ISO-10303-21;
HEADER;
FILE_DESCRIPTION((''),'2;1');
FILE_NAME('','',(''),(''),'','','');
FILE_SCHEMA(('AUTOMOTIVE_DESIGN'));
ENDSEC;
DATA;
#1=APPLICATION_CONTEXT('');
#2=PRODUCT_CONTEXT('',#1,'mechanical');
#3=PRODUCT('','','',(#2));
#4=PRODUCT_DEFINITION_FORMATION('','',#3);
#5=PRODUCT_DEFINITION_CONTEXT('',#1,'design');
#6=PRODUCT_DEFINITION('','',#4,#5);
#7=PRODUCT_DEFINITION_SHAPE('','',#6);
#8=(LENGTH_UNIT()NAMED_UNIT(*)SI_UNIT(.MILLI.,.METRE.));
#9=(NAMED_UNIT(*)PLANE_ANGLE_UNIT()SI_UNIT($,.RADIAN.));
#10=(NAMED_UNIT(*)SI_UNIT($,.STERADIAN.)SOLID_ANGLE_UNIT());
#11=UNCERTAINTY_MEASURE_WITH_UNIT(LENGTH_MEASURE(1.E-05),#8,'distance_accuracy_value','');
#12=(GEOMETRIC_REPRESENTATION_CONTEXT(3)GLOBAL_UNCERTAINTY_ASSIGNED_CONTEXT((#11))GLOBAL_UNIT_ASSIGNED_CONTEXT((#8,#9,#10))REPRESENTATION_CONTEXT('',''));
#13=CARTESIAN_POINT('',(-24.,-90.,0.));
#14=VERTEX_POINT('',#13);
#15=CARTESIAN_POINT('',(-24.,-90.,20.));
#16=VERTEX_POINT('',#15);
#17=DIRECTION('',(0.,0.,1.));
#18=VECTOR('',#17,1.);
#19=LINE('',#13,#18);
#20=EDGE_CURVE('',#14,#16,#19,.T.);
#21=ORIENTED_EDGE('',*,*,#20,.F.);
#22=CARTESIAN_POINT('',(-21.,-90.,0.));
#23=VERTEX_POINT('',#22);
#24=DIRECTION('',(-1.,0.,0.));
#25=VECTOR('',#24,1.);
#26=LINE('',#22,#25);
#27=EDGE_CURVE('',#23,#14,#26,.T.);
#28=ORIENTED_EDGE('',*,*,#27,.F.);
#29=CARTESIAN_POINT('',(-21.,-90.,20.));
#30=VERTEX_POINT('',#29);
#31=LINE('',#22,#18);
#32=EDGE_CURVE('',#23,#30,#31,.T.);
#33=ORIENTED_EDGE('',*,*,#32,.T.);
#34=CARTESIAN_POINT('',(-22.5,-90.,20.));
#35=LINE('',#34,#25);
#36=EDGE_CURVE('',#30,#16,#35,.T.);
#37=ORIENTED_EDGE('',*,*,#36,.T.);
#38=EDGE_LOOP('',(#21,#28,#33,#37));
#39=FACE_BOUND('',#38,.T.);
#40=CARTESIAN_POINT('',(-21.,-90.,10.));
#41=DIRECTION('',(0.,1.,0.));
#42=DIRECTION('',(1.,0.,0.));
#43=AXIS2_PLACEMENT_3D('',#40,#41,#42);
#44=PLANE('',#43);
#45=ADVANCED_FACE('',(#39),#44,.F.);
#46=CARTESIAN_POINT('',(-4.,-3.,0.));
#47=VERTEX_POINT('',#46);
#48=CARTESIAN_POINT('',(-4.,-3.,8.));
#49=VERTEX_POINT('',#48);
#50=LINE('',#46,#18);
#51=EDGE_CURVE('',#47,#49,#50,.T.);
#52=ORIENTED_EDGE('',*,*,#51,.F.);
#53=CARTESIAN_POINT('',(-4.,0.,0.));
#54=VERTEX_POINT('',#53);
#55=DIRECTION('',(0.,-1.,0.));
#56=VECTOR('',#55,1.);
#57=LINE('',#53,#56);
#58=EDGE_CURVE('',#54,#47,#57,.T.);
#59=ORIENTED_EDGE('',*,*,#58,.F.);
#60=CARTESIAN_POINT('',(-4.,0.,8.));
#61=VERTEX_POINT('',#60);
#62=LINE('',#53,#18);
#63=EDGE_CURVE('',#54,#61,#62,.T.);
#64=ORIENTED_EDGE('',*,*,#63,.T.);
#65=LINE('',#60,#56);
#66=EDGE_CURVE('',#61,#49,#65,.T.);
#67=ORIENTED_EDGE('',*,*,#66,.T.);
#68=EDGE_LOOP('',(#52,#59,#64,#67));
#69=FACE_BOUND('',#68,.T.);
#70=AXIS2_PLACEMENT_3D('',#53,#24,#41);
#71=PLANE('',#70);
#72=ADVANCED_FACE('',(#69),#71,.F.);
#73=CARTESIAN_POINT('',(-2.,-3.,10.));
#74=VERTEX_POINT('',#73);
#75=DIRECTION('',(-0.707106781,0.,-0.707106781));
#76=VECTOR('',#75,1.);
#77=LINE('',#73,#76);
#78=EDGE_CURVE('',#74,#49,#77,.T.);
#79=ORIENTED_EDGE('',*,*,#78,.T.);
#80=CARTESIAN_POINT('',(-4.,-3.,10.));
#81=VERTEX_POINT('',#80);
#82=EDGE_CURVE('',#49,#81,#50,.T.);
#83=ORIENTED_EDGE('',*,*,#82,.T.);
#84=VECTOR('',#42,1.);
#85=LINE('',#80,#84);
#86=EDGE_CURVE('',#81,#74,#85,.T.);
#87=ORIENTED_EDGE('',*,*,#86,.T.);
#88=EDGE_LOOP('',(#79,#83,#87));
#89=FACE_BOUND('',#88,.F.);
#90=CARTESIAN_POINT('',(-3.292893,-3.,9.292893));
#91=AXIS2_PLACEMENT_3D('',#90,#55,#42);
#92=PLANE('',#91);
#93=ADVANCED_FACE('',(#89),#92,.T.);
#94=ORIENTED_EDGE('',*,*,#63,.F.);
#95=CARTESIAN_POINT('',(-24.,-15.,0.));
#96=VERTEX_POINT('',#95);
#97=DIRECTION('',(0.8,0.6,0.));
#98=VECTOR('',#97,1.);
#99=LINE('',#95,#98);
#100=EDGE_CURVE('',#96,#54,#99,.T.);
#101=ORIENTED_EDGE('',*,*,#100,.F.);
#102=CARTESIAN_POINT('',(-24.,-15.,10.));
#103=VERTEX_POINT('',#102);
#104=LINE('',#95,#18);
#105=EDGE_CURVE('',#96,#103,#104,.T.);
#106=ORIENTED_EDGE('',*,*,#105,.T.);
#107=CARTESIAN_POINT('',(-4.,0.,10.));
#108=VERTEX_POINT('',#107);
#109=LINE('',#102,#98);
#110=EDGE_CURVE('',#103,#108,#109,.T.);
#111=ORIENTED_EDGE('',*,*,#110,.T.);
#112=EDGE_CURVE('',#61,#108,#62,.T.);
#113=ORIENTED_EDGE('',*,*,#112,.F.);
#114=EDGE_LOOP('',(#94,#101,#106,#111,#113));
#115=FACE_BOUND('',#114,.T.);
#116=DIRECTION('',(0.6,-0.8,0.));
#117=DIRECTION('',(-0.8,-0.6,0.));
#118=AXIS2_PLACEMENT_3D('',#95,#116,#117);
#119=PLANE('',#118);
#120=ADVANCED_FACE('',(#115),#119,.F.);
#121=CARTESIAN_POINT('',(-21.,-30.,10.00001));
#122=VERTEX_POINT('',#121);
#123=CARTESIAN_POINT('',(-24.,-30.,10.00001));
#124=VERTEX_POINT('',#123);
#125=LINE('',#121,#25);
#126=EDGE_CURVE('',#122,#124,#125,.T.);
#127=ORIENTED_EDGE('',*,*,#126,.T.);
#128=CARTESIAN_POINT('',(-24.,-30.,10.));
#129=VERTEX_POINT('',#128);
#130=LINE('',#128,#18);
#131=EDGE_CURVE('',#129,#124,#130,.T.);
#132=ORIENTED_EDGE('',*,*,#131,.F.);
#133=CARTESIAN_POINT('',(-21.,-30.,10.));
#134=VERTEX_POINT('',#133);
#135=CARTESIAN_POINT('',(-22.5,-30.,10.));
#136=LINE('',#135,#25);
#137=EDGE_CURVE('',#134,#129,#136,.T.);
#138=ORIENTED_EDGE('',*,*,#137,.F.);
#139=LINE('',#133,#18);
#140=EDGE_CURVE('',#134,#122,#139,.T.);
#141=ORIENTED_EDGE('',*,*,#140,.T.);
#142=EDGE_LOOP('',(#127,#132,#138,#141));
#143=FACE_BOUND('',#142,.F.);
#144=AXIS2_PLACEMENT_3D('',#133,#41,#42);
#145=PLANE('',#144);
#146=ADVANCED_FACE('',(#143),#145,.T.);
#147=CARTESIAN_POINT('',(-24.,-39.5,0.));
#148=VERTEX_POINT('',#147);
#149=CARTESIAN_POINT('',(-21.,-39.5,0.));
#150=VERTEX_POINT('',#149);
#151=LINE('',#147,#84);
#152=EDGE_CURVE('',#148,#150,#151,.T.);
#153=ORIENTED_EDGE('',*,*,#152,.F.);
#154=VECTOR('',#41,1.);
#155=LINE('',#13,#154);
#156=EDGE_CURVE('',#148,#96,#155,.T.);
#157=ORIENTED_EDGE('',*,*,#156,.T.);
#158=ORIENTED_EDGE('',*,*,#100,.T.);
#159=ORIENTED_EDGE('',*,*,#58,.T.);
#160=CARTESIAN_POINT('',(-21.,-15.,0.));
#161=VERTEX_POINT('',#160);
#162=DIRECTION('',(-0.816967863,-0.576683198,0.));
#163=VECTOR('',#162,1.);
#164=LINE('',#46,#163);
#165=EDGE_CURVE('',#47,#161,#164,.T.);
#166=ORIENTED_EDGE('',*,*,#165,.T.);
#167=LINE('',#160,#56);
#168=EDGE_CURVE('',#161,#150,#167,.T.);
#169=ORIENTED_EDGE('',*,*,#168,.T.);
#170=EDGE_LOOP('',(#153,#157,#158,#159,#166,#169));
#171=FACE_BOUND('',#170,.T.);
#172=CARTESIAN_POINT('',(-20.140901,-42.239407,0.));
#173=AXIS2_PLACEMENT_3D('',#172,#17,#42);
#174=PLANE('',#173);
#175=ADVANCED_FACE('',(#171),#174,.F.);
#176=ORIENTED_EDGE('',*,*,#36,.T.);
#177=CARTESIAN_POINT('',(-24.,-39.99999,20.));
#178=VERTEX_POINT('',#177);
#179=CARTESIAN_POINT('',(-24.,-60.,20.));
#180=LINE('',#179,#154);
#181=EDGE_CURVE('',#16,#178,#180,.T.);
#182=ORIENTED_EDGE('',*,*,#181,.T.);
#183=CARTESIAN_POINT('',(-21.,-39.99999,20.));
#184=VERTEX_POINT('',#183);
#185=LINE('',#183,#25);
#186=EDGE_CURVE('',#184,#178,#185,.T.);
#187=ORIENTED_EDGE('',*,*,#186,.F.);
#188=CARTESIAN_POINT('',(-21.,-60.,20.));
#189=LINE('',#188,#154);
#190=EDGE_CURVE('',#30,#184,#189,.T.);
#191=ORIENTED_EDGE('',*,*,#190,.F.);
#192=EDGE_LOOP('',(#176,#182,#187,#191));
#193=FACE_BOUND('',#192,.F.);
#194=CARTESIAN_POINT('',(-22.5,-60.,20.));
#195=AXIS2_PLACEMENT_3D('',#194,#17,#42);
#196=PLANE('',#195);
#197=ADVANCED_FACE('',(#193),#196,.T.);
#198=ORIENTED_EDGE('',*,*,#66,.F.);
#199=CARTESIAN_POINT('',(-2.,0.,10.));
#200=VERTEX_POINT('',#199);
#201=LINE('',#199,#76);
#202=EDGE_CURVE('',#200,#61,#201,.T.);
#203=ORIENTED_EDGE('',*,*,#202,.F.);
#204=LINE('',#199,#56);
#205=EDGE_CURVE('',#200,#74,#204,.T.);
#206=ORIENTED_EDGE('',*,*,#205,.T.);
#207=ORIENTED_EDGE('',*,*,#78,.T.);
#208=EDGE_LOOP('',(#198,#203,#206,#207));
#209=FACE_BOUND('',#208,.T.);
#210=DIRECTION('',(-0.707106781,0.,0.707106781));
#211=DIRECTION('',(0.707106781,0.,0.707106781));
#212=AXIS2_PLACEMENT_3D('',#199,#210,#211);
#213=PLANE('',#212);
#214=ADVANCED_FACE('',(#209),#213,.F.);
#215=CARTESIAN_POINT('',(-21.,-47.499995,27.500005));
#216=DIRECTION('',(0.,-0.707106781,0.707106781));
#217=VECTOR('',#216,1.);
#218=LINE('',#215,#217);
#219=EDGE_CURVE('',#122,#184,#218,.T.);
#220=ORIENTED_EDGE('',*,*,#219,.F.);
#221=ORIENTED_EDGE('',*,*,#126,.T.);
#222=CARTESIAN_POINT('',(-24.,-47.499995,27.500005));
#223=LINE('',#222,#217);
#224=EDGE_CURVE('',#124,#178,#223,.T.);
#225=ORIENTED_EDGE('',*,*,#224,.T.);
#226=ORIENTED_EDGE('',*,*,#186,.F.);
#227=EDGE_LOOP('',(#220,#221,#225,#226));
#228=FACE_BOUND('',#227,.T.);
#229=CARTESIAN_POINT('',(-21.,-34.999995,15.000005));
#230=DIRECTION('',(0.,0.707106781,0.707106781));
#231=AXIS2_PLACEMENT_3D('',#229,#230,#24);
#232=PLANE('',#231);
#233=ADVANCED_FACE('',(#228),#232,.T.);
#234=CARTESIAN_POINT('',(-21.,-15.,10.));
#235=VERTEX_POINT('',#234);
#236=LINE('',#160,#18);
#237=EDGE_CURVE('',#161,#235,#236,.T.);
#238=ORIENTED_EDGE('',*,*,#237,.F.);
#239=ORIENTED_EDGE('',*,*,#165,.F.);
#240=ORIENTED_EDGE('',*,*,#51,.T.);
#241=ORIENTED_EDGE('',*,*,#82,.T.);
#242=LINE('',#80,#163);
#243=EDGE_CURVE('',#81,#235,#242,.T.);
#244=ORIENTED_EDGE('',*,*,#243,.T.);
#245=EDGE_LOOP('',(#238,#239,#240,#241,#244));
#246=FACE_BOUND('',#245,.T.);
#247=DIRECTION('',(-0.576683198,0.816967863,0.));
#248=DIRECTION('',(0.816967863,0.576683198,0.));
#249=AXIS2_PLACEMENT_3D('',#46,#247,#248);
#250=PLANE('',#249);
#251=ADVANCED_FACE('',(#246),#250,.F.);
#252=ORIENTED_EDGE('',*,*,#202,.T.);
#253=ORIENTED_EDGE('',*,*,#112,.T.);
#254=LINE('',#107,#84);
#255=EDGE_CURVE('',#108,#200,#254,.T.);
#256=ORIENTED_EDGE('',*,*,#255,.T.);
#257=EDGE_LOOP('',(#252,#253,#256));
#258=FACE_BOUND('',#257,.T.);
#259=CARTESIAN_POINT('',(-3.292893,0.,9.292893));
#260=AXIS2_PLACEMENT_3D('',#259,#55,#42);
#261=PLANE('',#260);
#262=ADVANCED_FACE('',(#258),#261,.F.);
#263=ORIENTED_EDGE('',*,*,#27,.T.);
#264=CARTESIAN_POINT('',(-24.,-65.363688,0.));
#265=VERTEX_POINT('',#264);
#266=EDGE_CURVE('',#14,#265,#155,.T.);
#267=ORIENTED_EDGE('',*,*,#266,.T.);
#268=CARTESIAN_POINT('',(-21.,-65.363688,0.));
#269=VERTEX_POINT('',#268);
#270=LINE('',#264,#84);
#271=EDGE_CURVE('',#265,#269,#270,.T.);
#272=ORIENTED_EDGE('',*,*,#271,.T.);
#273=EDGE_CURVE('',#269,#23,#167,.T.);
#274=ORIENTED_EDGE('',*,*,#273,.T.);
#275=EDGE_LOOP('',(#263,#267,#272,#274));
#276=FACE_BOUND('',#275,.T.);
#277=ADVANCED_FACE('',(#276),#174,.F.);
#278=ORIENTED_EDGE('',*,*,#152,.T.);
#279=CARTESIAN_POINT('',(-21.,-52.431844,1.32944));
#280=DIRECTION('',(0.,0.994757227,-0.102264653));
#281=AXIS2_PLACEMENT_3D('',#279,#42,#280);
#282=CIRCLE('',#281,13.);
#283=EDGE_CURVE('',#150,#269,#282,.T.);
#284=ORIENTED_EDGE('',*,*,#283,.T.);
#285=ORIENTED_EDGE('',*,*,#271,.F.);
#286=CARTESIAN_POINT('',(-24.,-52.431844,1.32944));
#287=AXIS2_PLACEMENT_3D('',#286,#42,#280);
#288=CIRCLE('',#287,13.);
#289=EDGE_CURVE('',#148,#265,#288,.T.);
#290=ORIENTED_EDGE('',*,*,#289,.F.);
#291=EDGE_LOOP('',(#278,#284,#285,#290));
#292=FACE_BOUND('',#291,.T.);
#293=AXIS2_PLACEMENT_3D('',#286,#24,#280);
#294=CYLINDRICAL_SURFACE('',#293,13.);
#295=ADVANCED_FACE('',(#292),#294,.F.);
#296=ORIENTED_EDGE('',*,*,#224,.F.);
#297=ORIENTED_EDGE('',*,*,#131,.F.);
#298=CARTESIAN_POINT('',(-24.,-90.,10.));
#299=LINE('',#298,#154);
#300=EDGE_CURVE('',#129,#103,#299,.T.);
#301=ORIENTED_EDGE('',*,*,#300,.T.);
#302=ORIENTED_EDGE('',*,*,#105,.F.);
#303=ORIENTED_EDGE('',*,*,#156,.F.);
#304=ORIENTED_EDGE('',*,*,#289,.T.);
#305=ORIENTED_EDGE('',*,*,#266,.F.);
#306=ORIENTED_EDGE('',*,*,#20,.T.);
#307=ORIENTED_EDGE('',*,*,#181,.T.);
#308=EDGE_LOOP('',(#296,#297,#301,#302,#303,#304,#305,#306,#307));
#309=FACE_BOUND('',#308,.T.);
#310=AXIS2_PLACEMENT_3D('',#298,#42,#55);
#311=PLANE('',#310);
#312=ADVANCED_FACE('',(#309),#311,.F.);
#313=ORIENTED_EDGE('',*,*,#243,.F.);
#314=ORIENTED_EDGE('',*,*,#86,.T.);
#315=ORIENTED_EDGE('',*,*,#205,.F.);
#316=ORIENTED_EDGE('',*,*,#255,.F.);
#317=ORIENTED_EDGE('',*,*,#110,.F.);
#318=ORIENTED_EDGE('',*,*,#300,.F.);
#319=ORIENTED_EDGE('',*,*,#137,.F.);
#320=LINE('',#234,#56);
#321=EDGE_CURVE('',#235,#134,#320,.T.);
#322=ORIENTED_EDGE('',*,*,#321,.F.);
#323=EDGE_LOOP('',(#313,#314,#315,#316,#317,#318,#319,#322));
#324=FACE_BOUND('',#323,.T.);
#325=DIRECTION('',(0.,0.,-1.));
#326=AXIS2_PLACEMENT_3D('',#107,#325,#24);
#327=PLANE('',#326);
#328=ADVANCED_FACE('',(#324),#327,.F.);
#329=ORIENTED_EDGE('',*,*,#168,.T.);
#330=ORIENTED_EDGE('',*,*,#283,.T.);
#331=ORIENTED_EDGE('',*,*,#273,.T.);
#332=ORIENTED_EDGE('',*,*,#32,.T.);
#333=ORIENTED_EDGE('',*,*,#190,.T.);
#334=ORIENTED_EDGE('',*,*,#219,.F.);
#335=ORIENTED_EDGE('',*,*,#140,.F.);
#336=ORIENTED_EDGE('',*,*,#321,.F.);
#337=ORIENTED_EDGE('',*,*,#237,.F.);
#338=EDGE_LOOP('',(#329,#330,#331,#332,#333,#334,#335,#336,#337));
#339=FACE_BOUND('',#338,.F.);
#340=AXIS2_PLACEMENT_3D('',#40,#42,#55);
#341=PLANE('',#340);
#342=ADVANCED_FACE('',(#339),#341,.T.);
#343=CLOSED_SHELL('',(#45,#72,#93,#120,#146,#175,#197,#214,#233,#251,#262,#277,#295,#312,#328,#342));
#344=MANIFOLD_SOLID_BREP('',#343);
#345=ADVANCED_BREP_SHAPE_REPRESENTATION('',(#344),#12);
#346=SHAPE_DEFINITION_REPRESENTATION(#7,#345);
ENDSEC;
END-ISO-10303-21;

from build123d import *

# Parameters (mm, degrees)
F1_DEPTH = 10
F3_DEPTH = 3
F4_W     = 3
F4_H     = 60
F5_DEPTH = 10
F6_SIZE  = 9.99999
F8_DEPTH = 25


# Not quite as in the source:
# - a fillet or chamfer is up to 0.001 mm smaller than in the source, because OpenCascade refuses the exact size


with BuildPart() as f1:
    # F0 (on Top) → F1 (new body)
    with BuildSketch(Plane.XY):
        Polygon((20, -15), (0, 0), (0, -3), (17, -15), (17, -90), (20, -90), align=None)
    extrude(amount=F1_DEPTH)

    # F2 (on Front) → F3 (join)
    with BuildSketch(Plane.XZ):
        Polygon((0, 8), (0, 10), (-2, 10), align=None)
    extrude(amount=F3_DEPTH)

    # F4 (on face) → F5 (join)
    with BuildSketch(Plane.XY.offset(10)):
        with Locations((18.5, -60)):
            Rectangle(F4_W, F4_H)
    extrude(amount=F5_DEPTH)

    # F6 (size 10 in the source; OpenCascade refuses exactly that, so slightly less here)
    f6_edges = [f1.edges().sort_by_distance(p)[0] for p in [
        (18.5, -30, 20),
    ]]
    chamfer(f6_edges, length=F6_SIZE)

    # F7 (on face) → F8 (cut)
    with BuildSketch(Plane.YZ.offset(20)):
        with BuildLine():
            Line((-65.3636879024, 0), (-39.5, 0))
            ThreePointArc((-39.5, 0), (-52.4318439512, 14.3294404922), (-65.3636879024, 0))
        make_face()
    extrude(amount=-F8_DEPTH, mode=Mode.SUBTRACT)


with BuildPart() as f10_1:
    # F10: instance of F1
    add(f1.part.mirror(Plane.YZ.offset(-2)))


solid = f10_1.part
